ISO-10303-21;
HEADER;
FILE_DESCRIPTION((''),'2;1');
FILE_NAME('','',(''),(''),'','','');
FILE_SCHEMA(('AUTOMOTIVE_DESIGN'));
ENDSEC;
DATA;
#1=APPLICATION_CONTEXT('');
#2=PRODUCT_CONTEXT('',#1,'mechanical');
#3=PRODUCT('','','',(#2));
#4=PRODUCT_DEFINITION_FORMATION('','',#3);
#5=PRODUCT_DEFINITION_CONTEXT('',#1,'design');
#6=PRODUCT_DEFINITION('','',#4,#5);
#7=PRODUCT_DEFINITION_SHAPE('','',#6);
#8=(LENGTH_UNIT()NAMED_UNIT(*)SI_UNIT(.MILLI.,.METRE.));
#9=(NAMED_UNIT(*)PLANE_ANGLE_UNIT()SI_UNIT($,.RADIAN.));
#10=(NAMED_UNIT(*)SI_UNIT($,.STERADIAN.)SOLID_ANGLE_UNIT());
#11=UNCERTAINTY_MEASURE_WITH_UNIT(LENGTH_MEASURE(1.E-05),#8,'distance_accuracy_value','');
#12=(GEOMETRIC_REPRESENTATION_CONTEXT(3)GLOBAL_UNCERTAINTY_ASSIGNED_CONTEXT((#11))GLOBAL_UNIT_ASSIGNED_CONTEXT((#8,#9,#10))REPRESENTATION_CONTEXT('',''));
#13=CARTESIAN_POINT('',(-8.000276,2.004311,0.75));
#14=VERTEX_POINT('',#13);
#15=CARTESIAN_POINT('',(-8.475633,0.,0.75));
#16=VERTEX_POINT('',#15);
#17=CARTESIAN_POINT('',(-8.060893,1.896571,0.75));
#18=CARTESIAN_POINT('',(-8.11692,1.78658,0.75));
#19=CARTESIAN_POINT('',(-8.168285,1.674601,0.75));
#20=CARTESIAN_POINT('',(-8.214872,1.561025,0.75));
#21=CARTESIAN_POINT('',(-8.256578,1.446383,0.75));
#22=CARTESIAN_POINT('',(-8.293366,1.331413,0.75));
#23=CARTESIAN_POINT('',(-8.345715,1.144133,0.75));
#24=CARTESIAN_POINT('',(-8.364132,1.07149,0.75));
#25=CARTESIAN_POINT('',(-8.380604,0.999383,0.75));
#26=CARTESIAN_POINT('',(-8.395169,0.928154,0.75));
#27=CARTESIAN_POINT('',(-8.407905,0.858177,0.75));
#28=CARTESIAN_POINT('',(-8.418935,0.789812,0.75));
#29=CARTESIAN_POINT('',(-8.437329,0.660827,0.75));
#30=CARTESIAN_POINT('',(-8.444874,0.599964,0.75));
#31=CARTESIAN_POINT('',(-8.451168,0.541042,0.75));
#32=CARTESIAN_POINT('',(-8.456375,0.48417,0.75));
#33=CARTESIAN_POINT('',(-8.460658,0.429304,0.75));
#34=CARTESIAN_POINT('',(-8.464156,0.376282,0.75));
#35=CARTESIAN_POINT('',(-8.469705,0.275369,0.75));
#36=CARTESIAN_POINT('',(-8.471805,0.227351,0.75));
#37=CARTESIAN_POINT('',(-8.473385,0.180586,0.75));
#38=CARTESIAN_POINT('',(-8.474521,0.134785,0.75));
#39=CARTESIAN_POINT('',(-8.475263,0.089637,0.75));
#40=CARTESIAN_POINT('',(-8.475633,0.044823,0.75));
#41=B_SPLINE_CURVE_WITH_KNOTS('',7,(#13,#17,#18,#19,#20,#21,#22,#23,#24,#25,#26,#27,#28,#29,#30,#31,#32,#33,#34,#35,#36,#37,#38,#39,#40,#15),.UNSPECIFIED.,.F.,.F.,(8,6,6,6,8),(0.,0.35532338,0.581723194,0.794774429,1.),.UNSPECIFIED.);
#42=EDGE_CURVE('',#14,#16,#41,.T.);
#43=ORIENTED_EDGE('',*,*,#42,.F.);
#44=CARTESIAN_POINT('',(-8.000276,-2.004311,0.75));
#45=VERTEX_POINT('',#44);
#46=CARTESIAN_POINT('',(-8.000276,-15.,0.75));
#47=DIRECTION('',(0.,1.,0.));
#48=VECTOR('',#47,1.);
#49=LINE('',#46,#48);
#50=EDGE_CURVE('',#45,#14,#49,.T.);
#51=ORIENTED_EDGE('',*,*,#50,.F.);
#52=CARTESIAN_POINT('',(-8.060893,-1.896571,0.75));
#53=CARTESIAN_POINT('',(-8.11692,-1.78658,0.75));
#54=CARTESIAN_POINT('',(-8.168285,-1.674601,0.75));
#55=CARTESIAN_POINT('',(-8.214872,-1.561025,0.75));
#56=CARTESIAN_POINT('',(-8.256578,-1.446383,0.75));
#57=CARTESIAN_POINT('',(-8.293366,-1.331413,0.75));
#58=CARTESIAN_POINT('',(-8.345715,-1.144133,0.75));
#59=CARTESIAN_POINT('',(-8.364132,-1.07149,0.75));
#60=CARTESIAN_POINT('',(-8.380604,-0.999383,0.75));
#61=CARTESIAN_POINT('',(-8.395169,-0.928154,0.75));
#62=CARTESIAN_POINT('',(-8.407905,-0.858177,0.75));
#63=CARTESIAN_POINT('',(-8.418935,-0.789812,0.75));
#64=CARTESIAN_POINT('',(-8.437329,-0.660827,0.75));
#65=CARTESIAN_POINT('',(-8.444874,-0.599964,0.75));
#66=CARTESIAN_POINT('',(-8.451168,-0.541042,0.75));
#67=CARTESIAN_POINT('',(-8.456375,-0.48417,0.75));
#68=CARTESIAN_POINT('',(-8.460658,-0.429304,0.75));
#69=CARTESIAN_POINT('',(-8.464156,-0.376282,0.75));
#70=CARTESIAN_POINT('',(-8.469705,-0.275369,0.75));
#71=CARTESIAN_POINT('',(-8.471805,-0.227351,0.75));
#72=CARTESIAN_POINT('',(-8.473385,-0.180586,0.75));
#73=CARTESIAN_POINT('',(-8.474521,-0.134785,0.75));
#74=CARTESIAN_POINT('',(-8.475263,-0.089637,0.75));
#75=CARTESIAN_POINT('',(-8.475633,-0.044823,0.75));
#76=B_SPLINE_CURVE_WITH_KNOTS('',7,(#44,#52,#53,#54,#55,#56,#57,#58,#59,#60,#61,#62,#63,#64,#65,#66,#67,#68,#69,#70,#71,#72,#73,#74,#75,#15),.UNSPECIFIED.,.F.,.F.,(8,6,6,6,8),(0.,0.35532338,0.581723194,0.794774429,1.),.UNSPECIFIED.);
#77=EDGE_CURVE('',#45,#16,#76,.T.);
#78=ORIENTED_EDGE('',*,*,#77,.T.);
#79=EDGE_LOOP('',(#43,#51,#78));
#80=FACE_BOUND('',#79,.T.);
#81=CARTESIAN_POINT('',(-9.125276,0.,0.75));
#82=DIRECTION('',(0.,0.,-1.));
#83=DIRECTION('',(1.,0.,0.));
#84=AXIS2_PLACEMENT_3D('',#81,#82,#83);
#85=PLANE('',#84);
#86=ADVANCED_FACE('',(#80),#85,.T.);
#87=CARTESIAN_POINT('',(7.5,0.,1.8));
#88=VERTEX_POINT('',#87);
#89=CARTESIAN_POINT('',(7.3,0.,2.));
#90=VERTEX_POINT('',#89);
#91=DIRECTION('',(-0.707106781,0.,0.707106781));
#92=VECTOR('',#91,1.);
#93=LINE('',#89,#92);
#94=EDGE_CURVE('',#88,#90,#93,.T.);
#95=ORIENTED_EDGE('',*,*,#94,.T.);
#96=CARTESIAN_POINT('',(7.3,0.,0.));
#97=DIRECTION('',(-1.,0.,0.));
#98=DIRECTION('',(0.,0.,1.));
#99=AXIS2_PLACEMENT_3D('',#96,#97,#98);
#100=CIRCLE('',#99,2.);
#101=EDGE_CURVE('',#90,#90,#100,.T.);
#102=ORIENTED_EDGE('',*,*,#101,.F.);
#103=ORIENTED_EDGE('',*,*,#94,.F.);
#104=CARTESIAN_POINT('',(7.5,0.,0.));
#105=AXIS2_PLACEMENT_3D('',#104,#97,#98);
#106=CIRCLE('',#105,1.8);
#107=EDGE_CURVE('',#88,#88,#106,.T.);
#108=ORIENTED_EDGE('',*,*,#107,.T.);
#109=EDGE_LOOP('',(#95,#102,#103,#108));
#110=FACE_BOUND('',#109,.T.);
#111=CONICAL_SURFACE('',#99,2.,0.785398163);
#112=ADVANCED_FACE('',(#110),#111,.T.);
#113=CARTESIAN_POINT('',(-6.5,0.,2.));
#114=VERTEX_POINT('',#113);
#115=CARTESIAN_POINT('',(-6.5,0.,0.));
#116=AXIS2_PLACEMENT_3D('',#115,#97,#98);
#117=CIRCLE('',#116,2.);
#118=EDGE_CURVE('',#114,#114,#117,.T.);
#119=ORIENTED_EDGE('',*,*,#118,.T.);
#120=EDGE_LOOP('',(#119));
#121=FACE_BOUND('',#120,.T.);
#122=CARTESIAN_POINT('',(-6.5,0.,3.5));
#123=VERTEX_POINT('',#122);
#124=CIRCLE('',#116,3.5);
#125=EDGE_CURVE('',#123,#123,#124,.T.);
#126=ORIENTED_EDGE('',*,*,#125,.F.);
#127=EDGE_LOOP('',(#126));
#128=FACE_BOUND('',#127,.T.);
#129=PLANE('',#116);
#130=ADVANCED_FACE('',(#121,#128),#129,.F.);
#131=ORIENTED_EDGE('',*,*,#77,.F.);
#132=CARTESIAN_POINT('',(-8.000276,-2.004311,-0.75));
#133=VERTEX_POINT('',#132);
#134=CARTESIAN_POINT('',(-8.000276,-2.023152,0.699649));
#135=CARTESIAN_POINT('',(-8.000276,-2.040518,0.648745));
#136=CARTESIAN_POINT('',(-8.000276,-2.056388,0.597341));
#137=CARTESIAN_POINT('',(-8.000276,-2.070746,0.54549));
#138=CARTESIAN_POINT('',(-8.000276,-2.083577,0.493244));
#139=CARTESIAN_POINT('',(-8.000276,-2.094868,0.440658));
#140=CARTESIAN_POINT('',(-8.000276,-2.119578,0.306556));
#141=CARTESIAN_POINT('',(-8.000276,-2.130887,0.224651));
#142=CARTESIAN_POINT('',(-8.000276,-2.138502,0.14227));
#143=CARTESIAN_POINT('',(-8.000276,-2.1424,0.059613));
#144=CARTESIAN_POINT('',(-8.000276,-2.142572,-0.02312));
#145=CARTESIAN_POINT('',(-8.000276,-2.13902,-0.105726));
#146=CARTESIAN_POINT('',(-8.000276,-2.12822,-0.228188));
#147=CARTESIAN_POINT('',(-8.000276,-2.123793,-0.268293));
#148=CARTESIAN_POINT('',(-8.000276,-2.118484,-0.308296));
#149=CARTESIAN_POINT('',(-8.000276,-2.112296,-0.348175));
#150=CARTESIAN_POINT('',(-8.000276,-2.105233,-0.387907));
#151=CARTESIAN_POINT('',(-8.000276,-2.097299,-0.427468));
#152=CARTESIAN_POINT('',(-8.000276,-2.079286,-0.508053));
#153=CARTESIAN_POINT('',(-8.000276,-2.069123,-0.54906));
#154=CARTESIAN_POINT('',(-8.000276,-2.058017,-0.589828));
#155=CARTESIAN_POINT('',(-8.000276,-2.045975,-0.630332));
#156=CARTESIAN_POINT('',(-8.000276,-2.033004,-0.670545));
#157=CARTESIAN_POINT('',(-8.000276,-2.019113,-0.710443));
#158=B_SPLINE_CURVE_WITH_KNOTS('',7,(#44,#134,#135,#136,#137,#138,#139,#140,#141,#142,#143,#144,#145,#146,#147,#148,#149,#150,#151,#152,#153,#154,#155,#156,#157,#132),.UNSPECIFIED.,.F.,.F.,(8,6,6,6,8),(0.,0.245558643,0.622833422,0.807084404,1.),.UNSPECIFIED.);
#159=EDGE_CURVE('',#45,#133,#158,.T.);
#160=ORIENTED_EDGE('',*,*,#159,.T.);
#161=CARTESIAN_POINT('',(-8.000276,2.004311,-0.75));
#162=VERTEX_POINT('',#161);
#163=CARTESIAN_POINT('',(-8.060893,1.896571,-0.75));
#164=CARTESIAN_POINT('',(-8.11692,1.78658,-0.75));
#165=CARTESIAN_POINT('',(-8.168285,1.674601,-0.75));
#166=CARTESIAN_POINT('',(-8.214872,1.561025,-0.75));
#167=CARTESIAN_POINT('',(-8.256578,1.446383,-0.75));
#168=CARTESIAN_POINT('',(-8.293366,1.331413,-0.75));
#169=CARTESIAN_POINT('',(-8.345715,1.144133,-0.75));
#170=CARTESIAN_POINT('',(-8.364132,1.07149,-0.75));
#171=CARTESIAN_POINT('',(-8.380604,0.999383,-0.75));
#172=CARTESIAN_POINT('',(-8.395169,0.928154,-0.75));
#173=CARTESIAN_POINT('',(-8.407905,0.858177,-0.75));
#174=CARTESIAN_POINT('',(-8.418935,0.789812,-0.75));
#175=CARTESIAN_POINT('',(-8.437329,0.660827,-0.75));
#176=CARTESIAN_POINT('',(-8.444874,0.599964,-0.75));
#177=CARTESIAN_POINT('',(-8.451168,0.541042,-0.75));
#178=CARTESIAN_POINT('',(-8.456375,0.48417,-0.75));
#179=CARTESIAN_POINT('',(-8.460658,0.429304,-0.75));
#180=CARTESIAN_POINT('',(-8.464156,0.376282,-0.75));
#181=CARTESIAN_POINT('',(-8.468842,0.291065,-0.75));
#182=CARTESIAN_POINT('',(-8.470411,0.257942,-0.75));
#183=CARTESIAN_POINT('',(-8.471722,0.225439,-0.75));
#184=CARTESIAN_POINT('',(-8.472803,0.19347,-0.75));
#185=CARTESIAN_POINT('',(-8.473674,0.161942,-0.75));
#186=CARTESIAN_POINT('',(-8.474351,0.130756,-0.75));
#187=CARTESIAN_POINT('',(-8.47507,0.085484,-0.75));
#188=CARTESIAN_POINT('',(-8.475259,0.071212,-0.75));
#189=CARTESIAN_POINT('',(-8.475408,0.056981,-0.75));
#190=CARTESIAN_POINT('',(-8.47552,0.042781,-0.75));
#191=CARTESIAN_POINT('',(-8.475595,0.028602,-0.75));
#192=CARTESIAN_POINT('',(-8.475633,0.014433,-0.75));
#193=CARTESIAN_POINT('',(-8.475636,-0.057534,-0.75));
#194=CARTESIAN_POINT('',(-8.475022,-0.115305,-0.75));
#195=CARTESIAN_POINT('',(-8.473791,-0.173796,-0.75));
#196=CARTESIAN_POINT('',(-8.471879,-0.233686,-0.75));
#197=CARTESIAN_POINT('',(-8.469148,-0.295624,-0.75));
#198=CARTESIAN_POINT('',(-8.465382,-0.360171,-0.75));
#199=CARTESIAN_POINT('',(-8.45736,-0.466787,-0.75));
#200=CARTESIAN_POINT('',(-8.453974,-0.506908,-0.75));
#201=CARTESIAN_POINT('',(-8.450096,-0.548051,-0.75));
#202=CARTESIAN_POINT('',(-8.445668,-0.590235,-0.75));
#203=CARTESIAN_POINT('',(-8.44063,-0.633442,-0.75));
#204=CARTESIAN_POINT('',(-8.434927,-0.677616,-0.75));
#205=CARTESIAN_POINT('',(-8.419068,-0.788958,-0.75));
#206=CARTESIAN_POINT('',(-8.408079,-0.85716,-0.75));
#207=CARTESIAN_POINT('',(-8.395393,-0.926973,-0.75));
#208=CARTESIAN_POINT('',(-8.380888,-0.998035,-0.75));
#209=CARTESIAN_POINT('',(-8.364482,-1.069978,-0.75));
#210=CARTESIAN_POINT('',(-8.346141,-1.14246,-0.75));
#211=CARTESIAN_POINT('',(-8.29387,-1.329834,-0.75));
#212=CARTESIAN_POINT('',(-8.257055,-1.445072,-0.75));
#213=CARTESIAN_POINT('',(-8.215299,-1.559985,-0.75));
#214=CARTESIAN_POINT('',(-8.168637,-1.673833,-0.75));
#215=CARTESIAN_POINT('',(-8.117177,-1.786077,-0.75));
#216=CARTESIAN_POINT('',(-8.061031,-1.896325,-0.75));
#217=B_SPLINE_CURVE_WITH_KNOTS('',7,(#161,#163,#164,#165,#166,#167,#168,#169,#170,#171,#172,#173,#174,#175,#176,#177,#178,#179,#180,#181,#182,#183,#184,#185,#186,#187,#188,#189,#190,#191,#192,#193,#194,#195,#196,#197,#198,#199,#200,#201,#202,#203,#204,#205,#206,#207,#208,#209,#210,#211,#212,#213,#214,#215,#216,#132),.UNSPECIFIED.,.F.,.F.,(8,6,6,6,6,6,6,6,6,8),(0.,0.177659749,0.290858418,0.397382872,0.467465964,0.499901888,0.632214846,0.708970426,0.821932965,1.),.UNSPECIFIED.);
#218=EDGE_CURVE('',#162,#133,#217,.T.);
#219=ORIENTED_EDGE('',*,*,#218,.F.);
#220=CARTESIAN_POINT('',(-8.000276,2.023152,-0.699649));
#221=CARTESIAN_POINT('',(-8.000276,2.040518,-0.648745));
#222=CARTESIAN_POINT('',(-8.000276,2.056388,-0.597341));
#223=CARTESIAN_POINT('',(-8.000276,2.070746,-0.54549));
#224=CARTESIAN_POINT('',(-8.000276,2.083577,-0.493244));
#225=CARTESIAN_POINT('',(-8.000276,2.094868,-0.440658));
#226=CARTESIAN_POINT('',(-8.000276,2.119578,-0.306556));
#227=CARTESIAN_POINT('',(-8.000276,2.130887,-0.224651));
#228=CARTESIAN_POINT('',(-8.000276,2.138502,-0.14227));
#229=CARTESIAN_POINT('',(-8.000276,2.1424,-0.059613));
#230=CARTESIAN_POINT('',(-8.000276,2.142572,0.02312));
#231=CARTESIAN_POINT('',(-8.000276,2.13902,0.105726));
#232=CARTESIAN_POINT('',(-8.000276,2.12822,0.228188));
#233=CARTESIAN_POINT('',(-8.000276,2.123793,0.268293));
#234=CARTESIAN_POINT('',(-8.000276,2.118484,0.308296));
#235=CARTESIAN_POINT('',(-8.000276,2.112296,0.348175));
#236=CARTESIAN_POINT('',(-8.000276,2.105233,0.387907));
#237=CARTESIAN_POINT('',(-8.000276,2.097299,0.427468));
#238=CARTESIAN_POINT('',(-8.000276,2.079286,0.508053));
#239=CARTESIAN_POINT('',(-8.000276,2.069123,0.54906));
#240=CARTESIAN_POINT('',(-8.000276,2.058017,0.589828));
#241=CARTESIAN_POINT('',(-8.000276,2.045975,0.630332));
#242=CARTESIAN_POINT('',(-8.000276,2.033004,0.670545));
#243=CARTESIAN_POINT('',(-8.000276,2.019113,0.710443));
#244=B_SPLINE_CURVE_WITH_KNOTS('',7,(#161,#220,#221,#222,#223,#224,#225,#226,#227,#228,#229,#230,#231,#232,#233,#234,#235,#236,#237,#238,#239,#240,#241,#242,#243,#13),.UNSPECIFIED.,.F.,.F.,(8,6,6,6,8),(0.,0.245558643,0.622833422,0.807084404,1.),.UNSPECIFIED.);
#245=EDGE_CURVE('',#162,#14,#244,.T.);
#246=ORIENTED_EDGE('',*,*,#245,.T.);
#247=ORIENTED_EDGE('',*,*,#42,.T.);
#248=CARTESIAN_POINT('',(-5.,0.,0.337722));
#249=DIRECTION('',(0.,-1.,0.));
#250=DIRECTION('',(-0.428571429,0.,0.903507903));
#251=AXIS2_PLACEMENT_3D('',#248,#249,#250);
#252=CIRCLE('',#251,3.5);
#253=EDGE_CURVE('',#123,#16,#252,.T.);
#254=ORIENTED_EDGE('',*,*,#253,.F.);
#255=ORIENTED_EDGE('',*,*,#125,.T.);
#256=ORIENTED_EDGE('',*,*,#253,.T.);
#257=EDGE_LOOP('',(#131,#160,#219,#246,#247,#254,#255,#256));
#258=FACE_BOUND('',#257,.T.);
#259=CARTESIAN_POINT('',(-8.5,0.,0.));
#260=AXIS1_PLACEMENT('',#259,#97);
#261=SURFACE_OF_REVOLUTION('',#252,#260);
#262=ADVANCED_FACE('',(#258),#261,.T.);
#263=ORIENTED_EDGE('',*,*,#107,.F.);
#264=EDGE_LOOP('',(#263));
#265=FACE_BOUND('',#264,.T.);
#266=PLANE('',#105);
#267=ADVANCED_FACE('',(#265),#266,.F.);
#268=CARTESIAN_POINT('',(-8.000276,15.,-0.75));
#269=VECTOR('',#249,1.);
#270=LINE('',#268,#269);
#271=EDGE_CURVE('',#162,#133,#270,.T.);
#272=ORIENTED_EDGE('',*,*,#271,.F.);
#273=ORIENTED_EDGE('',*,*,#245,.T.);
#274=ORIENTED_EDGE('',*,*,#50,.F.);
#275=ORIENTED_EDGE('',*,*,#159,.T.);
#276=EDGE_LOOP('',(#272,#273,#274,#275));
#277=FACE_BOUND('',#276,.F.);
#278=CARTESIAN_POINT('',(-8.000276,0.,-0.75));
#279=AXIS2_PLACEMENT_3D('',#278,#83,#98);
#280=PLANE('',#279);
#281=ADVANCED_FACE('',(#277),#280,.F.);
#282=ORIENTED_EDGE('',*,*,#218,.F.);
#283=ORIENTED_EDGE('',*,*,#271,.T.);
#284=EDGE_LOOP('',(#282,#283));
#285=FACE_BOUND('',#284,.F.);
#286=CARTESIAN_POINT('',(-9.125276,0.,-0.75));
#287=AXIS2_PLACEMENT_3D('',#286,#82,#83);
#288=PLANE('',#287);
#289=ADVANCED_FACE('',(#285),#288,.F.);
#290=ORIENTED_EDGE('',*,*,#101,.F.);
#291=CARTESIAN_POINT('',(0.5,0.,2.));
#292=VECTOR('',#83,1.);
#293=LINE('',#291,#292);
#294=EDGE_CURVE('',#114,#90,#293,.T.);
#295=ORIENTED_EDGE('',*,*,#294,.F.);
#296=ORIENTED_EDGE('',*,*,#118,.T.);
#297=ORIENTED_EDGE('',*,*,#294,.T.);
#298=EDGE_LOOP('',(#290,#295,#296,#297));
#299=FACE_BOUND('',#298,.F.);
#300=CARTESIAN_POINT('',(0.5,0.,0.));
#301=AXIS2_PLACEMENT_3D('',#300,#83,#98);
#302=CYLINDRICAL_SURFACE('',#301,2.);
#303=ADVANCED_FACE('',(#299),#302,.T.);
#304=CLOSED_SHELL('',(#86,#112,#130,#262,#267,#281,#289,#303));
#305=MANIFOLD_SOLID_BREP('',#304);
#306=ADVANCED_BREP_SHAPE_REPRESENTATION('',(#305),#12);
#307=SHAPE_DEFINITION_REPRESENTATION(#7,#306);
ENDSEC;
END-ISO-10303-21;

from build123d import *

# Parameters (mm, degrees)
F0_W     = 14
F0_H     = 2
F3_SIZE  = 0.2
F4_W     = 1.125
F4_H     = 1.5
F5_DEPTH = 15


# Not quite as in the source:
# - a fillet or chamfer that OpenCascade refuses, or shapes differently, is made with other operations: its cross-section is extruded or revolved along the edge and cut away or added


with BuildPart() as f1:
    # F0 (on Front) → F1 (revolve)
    with BuildSketch(Plane.XZ):
        with Locations((0.5, 1)):
            Rectangle(F0_W, F0_H)
        Polygon((-8.5, 0), (-6.5, 0), (-6.5, 2), (-6.5, 3.5), (-8.5, 3.5), align=None)
    revolve(axis=Axis((-0.5, 0, 0), (-1, 0, 0)))

    # F2: fillet of radius 3.5 on 1 edges, made by hand

    # F2_s1 → F2_t2 (revolve, cut)
    with BuildSketch(Plane.XZ):
        with BuildLine():
            ThreePointArc((-6.5, 3.5), (-7.9580398915, 2.2085510332), (-8.5, 0.3377223398))
            Line((-8.5, 0.3377223398), (-8.5, 3.5))
            Line((-8.5, 3.5), (-6.5, 3.5))
        make_face()
    revolve(axis=Axis((-8.5, 0, 0), (-1, 0, 0)), mode=Mode.SUBTRACT)

    # F3
    f3_edges = [f1.edges().sort_by_distance(p)[0] for p in [
        (7.5, 0, -2),
    ]]
    chamfer(f3_edges, length=F3_SIZE)

    # F4 (on face) → F5 (cut, symmetric)
    with BuildSketch(Plane.XZ):
        with Locations((-8.5627762601, 0)):
            Rectangle(F4_W, F4_H)
    extrude(amount=F5_DEPTH, both=True, mode=Mode.SUBTRACT)


solid = f1.part
